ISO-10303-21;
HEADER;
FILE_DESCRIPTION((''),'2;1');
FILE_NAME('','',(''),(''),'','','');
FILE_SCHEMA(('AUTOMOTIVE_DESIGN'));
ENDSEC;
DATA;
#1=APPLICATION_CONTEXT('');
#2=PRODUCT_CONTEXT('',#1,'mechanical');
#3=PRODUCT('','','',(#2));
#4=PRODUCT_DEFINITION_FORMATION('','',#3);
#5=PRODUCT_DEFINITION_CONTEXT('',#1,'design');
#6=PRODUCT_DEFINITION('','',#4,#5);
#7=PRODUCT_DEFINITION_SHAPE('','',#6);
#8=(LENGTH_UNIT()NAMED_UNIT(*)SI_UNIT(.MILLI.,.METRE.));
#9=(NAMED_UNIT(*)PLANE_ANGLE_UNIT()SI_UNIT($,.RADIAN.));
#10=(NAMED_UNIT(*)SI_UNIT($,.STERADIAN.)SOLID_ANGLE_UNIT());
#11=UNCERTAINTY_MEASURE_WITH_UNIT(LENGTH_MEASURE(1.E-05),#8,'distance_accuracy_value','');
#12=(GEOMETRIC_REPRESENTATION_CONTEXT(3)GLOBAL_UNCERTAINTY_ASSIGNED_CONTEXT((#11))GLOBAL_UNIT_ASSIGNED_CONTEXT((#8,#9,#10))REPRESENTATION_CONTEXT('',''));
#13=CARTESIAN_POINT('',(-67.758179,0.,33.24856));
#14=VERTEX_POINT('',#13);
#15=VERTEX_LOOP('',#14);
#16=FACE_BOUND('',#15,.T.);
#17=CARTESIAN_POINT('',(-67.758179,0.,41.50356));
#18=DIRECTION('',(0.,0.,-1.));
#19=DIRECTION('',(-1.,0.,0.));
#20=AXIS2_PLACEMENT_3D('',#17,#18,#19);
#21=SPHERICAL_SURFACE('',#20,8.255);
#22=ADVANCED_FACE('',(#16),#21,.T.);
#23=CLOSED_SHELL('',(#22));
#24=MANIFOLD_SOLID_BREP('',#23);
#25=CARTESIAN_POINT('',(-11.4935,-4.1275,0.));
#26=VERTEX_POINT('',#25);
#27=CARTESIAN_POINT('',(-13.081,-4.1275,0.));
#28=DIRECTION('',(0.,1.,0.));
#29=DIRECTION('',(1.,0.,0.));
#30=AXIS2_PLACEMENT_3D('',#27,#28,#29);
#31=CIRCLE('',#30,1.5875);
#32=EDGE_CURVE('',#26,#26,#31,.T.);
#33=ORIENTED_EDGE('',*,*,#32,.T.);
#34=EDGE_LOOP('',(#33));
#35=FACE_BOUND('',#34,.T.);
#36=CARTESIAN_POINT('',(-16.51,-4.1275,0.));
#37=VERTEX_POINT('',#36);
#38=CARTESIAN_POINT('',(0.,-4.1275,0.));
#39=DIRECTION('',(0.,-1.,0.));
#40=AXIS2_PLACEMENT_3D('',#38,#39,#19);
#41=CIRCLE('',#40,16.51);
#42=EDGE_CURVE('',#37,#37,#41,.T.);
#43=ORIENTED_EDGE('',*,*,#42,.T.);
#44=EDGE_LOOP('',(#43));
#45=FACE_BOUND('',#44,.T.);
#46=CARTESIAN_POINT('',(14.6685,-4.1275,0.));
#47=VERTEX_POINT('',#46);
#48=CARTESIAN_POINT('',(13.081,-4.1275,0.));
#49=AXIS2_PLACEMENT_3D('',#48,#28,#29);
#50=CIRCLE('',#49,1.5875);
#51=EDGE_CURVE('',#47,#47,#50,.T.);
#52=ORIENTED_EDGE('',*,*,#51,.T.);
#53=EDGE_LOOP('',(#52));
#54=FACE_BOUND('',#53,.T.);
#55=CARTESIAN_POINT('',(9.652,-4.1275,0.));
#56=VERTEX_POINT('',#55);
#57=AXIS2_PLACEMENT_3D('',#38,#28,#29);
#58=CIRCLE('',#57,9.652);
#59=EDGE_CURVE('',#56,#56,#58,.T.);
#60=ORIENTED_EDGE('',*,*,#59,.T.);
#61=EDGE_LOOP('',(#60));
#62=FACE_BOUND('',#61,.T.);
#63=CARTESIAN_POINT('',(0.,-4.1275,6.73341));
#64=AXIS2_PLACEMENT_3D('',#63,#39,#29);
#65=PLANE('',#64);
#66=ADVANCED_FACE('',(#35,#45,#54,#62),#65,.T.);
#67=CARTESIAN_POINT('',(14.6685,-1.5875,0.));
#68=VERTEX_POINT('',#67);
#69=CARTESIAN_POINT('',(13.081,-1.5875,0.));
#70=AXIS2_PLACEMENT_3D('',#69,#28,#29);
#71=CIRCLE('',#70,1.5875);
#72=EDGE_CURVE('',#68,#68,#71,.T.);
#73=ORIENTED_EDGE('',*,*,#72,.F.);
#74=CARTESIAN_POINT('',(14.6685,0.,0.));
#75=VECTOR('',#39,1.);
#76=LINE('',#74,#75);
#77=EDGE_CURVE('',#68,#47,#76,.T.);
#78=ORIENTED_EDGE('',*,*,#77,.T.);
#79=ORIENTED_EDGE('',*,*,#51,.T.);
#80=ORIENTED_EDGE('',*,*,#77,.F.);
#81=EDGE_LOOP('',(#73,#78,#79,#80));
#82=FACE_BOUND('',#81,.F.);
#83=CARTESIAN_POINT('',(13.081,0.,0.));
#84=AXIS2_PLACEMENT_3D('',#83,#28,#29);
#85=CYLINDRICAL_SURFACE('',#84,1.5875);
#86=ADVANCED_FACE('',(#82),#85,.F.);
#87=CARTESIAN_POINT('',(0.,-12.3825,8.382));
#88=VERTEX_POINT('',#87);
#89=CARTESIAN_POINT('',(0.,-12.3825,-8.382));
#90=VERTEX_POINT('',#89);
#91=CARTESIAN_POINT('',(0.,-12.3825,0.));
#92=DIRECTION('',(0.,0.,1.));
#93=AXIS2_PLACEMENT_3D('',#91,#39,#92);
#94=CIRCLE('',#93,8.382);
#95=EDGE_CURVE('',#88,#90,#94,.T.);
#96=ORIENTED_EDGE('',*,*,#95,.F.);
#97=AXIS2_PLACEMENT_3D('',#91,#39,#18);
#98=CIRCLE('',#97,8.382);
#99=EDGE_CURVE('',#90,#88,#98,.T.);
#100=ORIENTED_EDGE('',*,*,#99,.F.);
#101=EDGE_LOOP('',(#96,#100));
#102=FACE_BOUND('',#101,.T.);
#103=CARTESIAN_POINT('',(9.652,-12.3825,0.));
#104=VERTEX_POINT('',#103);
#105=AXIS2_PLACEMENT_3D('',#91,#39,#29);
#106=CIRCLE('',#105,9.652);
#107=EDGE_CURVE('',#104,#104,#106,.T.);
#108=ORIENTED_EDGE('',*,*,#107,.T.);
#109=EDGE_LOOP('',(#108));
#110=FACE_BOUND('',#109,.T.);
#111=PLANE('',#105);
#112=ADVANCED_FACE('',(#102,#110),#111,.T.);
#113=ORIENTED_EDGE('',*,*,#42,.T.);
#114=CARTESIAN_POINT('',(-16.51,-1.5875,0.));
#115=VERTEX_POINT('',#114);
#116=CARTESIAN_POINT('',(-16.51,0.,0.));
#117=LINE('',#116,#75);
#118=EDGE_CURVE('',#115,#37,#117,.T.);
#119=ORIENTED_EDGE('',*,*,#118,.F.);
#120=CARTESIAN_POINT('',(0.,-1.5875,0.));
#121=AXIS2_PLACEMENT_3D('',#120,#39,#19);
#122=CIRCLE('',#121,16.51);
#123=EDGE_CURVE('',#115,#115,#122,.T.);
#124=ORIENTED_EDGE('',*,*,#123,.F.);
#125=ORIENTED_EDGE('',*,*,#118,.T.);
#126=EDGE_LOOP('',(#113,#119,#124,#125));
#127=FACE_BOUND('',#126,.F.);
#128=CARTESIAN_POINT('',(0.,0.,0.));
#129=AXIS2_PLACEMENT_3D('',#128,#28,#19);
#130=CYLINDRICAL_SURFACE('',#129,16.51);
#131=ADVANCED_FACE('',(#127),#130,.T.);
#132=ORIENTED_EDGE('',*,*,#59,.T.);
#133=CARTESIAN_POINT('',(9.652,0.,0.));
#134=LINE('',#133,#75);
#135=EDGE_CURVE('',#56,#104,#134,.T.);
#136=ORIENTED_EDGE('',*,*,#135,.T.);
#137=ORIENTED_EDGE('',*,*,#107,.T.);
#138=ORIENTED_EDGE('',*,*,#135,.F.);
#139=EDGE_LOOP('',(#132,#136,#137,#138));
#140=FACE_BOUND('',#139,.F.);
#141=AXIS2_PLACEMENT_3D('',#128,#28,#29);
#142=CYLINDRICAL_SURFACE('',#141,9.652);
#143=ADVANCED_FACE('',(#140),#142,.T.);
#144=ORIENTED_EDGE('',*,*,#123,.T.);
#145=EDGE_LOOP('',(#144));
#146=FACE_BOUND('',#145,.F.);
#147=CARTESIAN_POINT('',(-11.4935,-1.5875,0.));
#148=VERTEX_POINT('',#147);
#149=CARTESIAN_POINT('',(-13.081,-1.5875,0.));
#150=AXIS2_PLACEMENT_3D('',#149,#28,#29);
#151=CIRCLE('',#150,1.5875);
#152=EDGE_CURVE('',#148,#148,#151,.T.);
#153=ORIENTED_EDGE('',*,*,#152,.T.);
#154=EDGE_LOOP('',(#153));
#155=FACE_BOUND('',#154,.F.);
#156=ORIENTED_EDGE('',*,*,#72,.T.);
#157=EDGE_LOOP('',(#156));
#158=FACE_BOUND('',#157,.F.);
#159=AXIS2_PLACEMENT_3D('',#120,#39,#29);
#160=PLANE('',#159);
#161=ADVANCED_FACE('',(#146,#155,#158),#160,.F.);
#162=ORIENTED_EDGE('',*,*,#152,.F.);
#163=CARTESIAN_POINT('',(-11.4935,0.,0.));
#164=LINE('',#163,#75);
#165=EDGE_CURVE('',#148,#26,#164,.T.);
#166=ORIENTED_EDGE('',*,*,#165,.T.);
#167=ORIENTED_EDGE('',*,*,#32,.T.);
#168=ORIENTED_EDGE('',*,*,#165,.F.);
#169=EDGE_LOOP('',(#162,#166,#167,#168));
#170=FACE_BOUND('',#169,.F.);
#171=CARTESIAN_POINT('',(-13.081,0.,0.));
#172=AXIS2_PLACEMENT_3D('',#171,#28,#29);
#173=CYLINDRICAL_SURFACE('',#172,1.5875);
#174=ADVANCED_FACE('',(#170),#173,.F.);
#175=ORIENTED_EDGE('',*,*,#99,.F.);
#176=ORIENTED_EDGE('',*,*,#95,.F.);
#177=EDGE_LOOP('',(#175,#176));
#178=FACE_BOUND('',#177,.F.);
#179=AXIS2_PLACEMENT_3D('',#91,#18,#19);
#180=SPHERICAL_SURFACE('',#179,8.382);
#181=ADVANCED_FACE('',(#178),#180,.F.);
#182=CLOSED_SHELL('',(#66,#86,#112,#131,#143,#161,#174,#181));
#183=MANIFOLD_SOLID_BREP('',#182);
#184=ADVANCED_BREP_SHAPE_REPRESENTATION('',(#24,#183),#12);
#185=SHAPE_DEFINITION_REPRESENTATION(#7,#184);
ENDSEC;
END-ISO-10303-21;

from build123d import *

# Parameters (mm, degrees)
F1_DEPTH = 4.1275
F0_R     = 8.382
F2_DEPTH = 12.3825
F3_DEPTH = 1.5875


# Not quite as in the source:
# - a length typed as a fraction of an inch, garbled in the dataset ("3 / 203.2 mm" for 3/8 in), is restored


with BuildPart() as f1:
    # F0 (on Front) → F1 (new body)
    with BuildSketch(Plane.XZ):
        with BuildLine():
            ThreePointArc((-9.652, 0), (0, 9.652), (9.652, 0))
            Line((9.652, 0), (11.4935, 0))
            ThreePointArc((11.4935, 0), (13.081, 1.5875), (14.6685, 0))
            Line((14.6685, 0), (16.51, 0))
            ThreePointArc((16.51, 0), (0, 16.51), (-16.51, 0))
            Line((-16.51, 0), (-14.6685, 0))
            ThreePointArc((-14.6685, 0), (-13.081, 1.5875), (-11.4935, 0))
            Line((-11.4935, 0), (-9.652, 0))
        make_face()
        with BuildLine():
            Line((11.4935, 0), (9.652, 0))
            ThreePointArc((9.652, 0), (0, -9.652), (-9.652, 0))
            Line((-9.652, 0), (-11.4935, 0))
            ThreePointArc((-11.4935, 0), (-13.081, -1.5875), (-14.6685, 0))
            Line((-14.6685, 0), (-16.51, 0))
            ThreePointArc((-16.51, 0), (0, -16.51), (16.51, 0))
            Line((16.51, 0), (14.6685, 0))
            ThreePointArc((14.6685, 0), (13.081, -1.5875), (11.4935, 0))
        make_face()
    extrude(amount=F1_DEPTH)

    # F0 (on Front) → F2 (join)
    with BuildSketch(Plane.XZ):
        with BuildLine():
            ThreePointArc((-9.652, 0), (0, -9.652), (9.652, 0))
            ThreePointArc((9.652, 0), (0, 9.652), (-9.652, 0))
        make_face()
        Circle(F0_R, mode=Mode.SUBTRACT)
        Circle(F0_R)
    extrude(amount=F2_DEPTH)

    # F0 (on Front) → F3 (cut)
    with BuildSketch(Plane.XZ):
        with BuildLine():
            ThreePointArc((-9.652, 0), (0, -9.652), (9.652, 0))
            ThreePointArc((9.652, 0), (0, 9.652), (-9.652, 0))
        make_face()
        Circle(F0_R, mode=Mode.SUBTRACT)
        Circle(F0_R)
        with BuildLine():
            ThreePointArc((-9.652, 0), (0, 9.652), (9.652, 0))
            Line((9.652, 0), (11.4935, 0))
            ThreePointArc((11.4935, 0), (13.081, 1.5875), (14.6685, 0))
            Line((14.6685, 0), (16.51, 0))
            ThreePointArc((16.51, 0), (0, 16.51), (-16.51, 0))
            Line((-16.51, 0), (-14.6685, 0))
            ThreePointArc((-14.6685, 0), (-13.081, 1.5875), (-11.4935, 0))
            Line((-11.4935, 0), (-9.652, 0))
        make_face()
        with BuildLine():
            Line((11.4935, 0), (9.652, 0))
            ThreePointArc((9.652, 0), (0, -9.652), (-9.652, 0))
            Line((-9.652, 0), (-11.4935, 0))
            ThreePointArc((-11.4935, 0), (-13.081, -1.5875), (-14.6685, 0))
            Line((-14.6685, 0), (-16.51, 0))
            ThreePointArc((-16.51, 0), (0, -16.51), (16.51, 0))
            Line((16.51, 0), (14.6685, 0))
            ThreePointArc((14.6685, 0), (13.081, -1.5875), (11.4935, 0))
        make_face()
    extrude(amount=F3_DEPTH, mode=Mode.SUBTRACT)

    # F4 (on face) → F5 (revolve, cut)
    with BuildSketch(Plane.XZ.offset(12.3825)):
        with BuildLine():
            Line((0, -8.382), (0, 8.382))
            ThreePointArc((0, 8.382), (-8.382, 0), (0, -8.382))
        make_face()
    revolve(axis=Axis((0, -12.3825, 0), (0, 0, -1)), mode=Mode.SUBTRACT)


with BuildPart() as f7:
    # F6 (on Front) → F7 (revolve)
    with BuildSketch(Plane.XZ):
        with BuildLine():
            Line((-67.7581787605, 33.248559798), (-67.7581787605, 49.758559798))
            ThreePointArc((-67.7581787605, 49.758559798), (-76.0131787605, 41.503559798), (-67.7581787605, 33.248559798))
        make_face()
    revolve(axis=Axis((-67.7581787605, 0, 41.503559798), (0, 0, -1)))


solid = Compound([f1.part, f7.part])
